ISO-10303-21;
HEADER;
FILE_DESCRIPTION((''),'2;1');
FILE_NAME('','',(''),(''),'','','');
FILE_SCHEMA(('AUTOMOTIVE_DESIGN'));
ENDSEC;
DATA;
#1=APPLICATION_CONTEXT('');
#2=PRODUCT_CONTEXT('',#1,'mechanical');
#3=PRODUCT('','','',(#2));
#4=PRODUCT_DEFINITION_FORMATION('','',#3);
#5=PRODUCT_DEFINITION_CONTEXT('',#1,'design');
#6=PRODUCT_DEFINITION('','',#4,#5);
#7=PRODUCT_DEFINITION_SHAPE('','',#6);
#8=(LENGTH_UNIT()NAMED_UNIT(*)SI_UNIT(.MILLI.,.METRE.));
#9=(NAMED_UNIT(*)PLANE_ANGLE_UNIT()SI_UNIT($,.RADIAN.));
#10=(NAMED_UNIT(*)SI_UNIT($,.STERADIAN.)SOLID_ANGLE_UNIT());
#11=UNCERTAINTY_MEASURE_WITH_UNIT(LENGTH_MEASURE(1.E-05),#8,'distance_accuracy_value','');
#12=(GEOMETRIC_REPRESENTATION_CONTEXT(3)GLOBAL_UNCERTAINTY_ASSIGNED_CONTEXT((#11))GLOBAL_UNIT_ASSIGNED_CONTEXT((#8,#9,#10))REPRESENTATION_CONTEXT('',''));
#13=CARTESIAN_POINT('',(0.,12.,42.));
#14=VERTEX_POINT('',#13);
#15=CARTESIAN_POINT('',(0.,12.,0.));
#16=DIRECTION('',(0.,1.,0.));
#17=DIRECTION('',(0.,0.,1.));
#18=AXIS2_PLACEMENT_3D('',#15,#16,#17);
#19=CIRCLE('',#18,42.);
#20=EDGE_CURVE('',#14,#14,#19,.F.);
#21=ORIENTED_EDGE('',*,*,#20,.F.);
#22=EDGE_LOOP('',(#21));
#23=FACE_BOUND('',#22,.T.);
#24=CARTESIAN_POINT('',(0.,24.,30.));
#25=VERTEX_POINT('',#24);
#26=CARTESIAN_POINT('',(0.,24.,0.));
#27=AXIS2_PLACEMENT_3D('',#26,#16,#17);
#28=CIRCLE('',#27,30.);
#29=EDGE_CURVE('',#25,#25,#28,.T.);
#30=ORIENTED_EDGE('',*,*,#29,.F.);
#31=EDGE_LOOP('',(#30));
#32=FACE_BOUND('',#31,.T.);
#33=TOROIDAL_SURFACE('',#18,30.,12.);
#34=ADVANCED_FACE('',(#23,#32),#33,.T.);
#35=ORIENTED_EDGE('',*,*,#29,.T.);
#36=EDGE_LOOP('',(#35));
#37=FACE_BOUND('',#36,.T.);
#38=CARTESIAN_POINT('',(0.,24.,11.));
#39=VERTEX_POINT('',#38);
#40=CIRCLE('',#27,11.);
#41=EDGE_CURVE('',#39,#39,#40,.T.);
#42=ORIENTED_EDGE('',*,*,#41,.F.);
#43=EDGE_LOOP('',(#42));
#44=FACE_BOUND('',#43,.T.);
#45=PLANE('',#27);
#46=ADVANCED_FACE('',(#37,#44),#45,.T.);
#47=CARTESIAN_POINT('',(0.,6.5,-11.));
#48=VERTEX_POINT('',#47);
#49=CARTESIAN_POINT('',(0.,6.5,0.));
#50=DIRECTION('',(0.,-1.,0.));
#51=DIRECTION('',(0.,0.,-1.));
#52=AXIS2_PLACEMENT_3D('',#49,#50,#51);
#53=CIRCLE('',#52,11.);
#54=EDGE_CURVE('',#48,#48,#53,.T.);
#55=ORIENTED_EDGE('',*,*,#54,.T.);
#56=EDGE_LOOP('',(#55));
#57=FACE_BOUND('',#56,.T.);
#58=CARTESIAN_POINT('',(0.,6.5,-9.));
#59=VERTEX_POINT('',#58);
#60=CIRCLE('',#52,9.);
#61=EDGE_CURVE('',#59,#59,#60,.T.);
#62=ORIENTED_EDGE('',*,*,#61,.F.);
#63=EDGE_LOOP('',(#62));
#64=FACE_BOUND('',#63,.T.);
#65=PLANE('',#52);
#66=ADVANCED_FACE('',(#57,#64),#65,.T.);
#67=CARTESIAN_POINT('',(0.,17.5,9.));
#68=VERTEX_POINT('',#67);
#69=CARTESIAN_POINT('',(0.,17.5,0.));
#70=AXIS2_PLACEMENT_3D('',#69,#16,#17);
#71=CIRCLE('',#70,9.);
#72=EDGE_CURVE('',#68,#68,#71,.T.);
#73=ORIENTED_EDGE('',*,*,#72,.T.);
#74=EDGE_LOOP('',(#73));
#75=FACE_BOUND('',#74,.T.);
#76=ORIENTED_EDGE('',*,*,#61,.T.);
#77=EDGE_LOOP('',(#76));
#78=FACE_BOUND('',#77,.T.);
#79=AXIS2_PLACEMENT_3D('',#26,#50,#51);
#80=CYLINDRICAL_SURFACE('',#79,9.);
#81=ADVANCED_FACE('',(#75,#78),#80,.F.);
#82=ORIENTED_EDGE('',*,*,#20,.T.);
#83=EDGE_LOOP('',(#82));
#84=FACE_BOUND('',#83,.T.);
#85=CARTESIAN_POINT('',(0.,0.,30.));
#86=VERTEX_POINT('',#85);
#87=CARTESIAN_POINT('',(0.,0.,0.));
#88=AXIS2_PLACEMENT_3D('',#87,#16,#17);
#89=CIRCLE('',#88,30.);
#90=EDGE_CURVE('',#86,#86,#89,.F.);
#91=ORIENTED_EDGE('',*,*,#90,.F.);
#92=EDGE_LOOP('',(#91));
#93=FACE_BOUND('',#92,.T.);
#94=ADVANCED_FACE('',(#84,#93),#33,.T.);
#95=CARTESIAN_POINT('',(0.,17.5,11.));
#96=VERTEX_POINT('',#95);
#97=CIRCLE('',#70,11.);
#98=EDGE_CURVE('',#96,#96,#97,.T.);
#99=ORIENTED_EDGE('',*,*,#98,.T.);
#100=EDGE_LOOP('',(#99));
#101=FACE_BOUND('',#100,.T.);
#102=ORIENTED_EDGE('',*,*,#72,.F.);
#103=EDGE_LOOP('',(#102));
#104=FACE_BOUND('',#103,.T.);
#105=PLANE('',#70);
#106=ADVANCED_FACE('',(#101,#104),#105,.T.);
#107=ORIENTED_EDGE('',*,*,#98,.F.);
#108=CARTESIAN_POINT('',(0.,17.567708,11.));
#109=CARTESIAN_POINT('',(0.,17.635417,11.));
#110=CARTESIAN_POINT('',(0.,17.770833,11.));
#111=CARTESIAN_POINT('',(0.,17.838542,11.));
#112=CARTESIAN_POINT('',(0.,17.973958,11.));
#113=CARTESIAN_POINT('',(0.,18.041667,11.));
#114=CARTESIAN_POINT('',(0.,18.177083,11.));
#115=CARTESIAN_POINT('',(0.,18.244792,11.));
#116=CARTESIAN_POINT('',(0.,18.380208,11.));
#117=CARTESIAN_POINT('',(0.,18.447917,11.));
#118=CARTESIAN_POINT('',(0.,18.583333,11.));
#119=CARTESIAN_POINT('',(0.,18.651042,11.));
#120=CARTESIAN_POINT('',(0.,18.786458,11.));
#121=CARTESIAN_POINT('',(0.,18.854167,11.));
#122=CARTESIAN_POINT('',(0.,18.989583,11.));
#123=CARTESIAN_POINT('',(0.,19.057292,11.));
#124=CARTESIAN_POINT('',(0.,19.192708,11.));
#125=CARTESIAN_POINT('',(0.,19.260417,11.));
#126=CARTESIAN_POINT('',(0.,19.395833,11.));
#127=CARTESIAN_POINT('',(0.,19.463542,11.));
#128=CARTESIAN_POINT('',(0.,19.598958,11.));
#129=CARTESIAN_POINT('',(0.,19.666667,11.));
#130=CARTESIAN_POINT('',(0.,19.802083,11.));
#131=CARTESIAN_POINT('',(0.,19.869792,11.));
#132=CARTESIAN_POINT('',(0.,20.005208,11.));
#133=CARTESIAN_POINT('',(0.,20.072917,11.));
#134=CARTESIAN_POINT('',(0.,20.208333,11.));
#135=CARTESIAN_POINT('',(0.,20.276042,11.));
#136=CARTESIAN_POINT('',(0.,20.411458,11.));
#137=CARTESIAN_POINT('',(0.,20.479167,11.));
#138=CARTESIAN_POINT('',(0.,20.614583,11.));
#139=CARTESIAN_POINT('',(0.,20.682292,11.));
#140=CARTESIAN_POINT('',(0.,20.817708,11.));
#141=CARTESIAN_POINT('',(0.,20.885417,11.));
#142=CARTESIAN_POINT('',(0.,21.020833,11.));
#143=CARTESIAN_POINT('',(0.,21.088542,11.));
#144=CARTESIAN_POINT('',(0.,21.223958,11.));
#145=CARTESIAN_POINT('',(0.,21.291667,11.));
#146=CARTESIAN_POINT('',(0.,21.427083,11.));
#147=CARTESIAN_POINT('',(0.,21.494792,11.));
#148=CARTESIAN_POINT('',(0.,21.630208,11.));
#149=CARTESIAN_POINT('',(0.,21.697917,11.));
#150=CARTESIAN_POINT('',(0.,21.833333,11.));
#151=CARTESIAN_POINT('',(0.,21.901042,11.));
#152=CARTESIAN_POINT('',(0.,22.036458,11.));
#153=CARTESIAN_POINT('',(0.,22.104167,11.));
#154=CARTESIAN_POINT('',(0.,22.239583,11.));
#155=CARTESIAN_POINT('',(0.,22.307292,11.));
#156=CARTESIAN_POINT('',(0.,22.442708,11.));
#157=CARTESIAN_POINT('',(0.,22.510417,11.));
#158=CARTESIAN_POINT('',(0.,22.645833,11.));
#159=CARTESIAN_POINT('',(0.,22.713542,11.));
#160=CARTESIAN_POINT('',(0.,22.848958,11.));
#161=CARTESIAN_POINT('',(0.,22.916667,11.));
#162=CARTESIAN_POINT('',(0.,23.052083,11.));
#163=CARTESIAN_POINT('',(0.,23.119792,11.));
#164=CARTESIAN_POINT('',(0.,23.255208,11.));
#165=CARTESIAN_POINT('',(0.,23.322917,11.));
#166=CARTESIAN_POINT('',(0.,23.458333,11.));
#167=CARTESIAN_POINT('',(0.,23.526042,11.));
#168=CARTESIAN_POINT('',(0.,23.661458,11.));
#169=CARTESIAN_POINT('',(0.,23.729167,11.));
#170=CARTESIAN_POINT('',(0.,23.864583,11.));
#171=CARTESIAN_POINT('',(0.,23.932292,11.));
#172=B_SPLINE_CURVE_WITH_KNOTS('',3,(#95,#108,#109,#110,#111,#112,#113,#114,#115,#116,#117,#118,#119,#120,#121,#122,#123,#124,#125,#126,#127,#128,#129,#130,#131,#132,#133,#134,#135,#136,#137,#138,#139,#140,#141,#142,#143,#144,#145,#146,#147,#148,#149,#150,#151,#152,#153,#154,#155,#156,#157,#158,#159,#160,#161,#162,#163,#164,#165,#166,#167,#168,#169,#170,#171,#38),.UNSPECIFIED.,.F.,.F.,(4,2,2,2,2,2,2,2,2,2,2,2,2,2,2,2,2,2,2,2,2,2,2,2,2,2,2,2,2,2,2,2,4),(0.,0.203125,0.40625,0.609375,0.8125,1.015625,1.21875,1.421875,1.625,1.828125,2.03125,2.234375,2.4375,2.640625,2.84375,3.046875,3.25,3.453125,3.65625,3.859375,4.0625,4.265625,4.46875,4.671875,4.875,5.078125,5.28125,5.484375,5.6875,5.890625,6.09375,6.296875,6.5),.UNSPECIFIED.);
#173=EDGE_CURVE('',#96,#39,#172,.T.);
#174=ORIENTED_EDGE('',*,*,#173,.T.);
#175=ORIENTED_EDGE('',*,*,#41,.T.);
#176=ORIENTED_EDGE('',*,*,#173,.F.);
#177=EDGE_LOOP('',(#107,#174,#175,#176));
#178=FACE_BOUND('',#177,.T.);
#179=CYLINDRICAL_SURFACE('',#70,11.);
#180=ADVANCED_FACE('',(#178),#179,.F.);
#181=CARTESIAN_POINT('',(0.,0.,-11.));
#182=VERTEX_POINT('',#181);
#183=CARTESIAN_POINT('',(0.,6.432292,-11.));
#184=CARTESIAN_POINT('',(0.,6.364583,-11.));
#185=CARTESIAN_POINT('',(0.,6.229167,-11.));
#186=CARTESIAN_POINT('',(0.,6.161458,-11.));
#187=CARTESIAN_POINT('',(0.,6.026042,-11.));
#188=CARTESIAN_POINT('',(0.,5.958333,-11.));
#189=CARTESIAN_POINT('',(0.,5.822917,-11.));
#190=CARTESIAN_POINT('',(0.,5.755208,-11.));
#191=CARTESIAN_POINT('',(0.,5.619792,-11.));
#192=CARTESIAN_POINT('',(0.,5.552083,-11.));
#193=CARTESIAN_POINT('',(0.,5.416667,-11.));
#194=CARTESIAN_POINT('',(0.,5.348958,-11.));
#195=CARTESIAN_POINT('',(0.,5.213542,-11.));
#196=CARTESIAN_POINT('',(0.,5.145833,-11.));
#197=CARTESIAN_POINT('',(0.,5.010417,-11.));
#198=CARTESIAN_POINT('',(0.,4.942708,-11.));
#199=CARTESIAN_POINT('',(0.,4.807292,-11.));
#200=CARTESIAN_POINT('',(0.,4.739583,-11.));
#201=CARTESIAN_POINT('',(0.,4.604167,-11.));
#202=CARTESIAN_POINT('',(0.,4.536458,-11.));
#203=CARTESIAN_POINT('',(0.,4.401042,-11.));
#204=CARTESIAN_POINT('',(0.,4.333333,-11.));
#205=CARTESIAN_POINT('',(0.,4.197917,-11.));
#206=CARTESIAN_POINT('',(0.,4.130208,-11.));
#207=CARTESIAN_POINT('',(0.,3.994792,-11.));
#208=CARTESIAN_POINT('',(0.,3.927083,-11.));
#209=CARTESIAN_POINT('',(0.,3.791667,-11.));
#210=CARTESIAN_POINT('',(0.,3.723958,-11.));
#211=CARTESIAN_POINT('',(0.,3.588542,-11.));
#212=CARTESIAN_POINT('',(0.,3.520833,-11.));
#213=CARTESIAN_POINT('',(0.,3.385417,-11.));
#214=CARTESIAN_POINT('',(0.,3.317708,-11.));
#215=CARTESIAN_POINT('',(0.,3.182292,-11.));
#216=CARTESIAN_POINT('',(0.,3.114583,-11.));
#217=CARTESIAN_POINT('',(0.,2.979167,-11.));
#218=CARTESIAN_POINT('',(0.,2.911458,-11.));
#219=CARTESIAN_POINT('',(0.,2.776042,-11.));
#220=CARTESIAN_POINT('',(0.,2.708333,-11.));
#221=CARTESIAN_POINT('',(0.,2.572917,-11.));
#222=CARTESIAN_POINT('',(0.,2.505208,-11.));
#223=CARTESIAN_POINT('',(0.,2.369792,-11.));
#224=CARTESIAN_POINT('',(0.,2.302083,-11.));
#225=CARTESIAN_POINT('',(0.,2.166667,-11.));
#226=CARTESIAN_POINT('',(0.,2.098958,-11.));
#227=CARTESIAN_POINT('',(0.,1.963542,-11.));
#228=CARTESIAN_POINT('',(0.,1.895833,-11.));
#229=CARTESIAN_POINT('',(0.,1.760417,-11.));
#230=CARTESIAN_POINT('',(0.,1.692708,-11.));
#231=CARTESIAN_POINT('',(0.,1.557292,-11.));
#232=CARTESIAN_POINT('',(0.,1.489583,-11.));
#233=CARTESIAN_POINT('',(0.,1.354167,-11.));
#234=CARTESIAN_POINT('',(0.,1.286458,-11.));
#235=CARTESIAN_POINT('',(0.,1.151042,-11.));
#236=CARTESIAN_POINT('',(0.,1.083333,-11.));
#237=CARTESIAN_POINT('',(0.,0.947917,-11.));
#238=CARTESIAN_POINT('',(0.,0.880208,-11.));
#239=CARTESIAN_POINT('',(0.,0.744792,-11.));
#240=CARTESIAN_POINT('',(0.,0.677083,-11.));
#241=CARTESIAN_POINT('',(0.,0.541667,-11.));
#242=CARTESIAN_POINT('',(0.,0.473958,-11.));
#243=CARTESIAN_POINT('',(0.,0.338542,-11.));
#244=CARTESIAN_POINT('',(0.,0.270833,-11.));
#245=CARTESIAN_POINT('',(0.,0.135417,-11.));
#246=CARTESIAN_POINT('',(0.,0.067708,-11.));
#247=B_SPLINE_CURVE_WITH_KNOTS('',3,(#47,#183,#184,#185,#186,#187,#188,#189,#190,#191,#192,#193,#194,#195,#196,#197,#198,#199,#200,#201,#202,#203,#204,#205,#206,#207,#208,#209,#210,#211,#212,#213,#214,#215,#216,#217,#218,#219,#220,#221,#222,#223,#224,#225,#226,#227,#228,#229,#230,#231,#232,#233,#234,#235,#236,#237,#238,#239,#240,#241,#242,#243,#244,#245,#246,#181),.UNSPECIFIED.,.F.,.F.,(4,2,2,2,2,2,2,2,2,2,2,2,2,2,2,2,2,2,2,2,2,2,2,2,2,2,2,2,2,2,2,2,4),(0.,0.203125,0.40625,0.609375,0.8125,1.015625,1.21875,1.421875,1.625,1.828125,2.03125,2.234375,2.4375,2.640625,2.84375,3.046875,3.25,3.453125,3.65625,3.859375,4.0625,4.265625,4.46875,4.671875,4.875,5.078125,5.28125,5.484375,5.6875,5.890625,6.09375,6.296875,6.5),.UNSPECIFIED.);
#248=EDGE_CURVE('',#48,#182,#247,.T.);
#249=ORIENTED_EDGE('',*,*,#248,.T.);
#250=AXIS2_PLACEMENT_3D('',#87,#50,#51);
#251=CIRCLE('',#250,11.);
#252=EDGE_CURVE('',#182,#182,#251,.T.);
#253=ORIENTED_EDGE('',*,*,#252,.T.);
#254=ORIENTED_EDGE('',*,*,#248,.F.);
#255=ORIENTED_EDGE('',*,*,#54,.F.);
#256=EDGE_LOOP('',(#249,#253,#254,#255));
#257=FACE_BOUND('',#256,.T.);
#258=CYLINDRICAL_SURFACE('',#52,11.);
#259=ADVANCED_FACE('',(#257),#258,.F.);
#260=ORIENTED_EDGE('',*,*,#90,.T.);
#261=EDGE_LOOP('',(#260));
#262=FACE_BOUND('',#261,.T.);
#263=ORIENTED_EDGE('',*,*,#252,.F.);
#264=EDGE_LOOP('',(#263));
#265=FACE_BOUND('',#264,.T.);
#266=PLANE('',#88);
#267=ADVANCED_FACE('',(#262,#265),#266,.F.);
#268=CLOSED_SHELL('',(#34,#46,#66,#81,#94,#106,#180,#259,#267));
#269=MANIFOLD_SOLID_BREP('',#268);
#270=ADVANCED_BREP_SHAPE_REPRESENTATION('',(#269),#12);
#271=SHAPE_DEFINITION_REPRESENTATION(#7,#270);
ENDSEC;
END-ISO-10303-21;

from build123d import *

# Parameters (mm, degrees)
SKETCH1_R           = 42
BOSS_EXTRUDE1_DEPTH = 24
FILLET1_R           = 12
SKETCH2_R           = 11
CUT_EXTRUDE1_DEPTH  = 6.5
CUT_EXTRUDE2_START  = -6.5
SKETCH3_R           = 11
CUT_EXTRUDE2_DEPTH  = 6.5
SKETCH4_R           = 9
CUT_EXTRUDE3_DEPTH  = 62.921321113


with BuildPart() as part:
    # Sketch1 → Boss-Extrude1 (new body)
    with BuildSketch(Plane(origin=(0, 0, 0), x_dir=(1, 0, 0), z_dir=(0, 1, 0))):
        with Locations(Location((0, 0, 0), (0, 0, 270))):
            Circle(SKETCH1_R)
    extrude(amount=BOSS_EXTRUDE1_DEPTH)

    # Fillet1
    fillet1_edges = [part.edges().sort_by_distance(p)[0] for p in [
        (0, 0, -42),
        (0, 24, -42),
    ]]
    fillet(fillet1_edges, radius=FILLET1_R - 0.0001)  # a hair under: the kernel refuses the full size

    # Sketch2 → Cut-Extrude1 (cut)
    with BuildSketch(Plane(origin=(0, 24, 0), x_dir=(1, 0, 0), z_dir=(0, 1, 0))):
        with Locations(Location((0, 0, 0), (0, 0, 270))):
            Circle(SKETCH2_R)
    extrude(amount=-CUT_EXTRUDE1_DEPTH, mode=Mode.SUBTRACT)

    # Sketch3 → Cut-Extrude2 (cut)
    with BuildSketch(Plane.XZ.offset(CUT_EXTRUDE2_START)):
        with Locations(Location((0, 0, 0), (0, 0, 90))):
            Circle(SKETCH3_R)
    extrude(amount=CUT_EXTRUDE2_DEPTH, mode=Mode.SUBTRACT)

    # Sketch4 → Cut-Extrude3 (cut, through all)
    with BuildSketch(Plane.XZ.offset(-6.5)):
        with Locations(Location((0, 0, 0), (0, 0, 270))):
            Circle(SKETCH4_R)
    extrude(amount=-CUT_EXTRUDE3_DEPTH, mode=Mode.SUBTRACT)


solid = part.part
